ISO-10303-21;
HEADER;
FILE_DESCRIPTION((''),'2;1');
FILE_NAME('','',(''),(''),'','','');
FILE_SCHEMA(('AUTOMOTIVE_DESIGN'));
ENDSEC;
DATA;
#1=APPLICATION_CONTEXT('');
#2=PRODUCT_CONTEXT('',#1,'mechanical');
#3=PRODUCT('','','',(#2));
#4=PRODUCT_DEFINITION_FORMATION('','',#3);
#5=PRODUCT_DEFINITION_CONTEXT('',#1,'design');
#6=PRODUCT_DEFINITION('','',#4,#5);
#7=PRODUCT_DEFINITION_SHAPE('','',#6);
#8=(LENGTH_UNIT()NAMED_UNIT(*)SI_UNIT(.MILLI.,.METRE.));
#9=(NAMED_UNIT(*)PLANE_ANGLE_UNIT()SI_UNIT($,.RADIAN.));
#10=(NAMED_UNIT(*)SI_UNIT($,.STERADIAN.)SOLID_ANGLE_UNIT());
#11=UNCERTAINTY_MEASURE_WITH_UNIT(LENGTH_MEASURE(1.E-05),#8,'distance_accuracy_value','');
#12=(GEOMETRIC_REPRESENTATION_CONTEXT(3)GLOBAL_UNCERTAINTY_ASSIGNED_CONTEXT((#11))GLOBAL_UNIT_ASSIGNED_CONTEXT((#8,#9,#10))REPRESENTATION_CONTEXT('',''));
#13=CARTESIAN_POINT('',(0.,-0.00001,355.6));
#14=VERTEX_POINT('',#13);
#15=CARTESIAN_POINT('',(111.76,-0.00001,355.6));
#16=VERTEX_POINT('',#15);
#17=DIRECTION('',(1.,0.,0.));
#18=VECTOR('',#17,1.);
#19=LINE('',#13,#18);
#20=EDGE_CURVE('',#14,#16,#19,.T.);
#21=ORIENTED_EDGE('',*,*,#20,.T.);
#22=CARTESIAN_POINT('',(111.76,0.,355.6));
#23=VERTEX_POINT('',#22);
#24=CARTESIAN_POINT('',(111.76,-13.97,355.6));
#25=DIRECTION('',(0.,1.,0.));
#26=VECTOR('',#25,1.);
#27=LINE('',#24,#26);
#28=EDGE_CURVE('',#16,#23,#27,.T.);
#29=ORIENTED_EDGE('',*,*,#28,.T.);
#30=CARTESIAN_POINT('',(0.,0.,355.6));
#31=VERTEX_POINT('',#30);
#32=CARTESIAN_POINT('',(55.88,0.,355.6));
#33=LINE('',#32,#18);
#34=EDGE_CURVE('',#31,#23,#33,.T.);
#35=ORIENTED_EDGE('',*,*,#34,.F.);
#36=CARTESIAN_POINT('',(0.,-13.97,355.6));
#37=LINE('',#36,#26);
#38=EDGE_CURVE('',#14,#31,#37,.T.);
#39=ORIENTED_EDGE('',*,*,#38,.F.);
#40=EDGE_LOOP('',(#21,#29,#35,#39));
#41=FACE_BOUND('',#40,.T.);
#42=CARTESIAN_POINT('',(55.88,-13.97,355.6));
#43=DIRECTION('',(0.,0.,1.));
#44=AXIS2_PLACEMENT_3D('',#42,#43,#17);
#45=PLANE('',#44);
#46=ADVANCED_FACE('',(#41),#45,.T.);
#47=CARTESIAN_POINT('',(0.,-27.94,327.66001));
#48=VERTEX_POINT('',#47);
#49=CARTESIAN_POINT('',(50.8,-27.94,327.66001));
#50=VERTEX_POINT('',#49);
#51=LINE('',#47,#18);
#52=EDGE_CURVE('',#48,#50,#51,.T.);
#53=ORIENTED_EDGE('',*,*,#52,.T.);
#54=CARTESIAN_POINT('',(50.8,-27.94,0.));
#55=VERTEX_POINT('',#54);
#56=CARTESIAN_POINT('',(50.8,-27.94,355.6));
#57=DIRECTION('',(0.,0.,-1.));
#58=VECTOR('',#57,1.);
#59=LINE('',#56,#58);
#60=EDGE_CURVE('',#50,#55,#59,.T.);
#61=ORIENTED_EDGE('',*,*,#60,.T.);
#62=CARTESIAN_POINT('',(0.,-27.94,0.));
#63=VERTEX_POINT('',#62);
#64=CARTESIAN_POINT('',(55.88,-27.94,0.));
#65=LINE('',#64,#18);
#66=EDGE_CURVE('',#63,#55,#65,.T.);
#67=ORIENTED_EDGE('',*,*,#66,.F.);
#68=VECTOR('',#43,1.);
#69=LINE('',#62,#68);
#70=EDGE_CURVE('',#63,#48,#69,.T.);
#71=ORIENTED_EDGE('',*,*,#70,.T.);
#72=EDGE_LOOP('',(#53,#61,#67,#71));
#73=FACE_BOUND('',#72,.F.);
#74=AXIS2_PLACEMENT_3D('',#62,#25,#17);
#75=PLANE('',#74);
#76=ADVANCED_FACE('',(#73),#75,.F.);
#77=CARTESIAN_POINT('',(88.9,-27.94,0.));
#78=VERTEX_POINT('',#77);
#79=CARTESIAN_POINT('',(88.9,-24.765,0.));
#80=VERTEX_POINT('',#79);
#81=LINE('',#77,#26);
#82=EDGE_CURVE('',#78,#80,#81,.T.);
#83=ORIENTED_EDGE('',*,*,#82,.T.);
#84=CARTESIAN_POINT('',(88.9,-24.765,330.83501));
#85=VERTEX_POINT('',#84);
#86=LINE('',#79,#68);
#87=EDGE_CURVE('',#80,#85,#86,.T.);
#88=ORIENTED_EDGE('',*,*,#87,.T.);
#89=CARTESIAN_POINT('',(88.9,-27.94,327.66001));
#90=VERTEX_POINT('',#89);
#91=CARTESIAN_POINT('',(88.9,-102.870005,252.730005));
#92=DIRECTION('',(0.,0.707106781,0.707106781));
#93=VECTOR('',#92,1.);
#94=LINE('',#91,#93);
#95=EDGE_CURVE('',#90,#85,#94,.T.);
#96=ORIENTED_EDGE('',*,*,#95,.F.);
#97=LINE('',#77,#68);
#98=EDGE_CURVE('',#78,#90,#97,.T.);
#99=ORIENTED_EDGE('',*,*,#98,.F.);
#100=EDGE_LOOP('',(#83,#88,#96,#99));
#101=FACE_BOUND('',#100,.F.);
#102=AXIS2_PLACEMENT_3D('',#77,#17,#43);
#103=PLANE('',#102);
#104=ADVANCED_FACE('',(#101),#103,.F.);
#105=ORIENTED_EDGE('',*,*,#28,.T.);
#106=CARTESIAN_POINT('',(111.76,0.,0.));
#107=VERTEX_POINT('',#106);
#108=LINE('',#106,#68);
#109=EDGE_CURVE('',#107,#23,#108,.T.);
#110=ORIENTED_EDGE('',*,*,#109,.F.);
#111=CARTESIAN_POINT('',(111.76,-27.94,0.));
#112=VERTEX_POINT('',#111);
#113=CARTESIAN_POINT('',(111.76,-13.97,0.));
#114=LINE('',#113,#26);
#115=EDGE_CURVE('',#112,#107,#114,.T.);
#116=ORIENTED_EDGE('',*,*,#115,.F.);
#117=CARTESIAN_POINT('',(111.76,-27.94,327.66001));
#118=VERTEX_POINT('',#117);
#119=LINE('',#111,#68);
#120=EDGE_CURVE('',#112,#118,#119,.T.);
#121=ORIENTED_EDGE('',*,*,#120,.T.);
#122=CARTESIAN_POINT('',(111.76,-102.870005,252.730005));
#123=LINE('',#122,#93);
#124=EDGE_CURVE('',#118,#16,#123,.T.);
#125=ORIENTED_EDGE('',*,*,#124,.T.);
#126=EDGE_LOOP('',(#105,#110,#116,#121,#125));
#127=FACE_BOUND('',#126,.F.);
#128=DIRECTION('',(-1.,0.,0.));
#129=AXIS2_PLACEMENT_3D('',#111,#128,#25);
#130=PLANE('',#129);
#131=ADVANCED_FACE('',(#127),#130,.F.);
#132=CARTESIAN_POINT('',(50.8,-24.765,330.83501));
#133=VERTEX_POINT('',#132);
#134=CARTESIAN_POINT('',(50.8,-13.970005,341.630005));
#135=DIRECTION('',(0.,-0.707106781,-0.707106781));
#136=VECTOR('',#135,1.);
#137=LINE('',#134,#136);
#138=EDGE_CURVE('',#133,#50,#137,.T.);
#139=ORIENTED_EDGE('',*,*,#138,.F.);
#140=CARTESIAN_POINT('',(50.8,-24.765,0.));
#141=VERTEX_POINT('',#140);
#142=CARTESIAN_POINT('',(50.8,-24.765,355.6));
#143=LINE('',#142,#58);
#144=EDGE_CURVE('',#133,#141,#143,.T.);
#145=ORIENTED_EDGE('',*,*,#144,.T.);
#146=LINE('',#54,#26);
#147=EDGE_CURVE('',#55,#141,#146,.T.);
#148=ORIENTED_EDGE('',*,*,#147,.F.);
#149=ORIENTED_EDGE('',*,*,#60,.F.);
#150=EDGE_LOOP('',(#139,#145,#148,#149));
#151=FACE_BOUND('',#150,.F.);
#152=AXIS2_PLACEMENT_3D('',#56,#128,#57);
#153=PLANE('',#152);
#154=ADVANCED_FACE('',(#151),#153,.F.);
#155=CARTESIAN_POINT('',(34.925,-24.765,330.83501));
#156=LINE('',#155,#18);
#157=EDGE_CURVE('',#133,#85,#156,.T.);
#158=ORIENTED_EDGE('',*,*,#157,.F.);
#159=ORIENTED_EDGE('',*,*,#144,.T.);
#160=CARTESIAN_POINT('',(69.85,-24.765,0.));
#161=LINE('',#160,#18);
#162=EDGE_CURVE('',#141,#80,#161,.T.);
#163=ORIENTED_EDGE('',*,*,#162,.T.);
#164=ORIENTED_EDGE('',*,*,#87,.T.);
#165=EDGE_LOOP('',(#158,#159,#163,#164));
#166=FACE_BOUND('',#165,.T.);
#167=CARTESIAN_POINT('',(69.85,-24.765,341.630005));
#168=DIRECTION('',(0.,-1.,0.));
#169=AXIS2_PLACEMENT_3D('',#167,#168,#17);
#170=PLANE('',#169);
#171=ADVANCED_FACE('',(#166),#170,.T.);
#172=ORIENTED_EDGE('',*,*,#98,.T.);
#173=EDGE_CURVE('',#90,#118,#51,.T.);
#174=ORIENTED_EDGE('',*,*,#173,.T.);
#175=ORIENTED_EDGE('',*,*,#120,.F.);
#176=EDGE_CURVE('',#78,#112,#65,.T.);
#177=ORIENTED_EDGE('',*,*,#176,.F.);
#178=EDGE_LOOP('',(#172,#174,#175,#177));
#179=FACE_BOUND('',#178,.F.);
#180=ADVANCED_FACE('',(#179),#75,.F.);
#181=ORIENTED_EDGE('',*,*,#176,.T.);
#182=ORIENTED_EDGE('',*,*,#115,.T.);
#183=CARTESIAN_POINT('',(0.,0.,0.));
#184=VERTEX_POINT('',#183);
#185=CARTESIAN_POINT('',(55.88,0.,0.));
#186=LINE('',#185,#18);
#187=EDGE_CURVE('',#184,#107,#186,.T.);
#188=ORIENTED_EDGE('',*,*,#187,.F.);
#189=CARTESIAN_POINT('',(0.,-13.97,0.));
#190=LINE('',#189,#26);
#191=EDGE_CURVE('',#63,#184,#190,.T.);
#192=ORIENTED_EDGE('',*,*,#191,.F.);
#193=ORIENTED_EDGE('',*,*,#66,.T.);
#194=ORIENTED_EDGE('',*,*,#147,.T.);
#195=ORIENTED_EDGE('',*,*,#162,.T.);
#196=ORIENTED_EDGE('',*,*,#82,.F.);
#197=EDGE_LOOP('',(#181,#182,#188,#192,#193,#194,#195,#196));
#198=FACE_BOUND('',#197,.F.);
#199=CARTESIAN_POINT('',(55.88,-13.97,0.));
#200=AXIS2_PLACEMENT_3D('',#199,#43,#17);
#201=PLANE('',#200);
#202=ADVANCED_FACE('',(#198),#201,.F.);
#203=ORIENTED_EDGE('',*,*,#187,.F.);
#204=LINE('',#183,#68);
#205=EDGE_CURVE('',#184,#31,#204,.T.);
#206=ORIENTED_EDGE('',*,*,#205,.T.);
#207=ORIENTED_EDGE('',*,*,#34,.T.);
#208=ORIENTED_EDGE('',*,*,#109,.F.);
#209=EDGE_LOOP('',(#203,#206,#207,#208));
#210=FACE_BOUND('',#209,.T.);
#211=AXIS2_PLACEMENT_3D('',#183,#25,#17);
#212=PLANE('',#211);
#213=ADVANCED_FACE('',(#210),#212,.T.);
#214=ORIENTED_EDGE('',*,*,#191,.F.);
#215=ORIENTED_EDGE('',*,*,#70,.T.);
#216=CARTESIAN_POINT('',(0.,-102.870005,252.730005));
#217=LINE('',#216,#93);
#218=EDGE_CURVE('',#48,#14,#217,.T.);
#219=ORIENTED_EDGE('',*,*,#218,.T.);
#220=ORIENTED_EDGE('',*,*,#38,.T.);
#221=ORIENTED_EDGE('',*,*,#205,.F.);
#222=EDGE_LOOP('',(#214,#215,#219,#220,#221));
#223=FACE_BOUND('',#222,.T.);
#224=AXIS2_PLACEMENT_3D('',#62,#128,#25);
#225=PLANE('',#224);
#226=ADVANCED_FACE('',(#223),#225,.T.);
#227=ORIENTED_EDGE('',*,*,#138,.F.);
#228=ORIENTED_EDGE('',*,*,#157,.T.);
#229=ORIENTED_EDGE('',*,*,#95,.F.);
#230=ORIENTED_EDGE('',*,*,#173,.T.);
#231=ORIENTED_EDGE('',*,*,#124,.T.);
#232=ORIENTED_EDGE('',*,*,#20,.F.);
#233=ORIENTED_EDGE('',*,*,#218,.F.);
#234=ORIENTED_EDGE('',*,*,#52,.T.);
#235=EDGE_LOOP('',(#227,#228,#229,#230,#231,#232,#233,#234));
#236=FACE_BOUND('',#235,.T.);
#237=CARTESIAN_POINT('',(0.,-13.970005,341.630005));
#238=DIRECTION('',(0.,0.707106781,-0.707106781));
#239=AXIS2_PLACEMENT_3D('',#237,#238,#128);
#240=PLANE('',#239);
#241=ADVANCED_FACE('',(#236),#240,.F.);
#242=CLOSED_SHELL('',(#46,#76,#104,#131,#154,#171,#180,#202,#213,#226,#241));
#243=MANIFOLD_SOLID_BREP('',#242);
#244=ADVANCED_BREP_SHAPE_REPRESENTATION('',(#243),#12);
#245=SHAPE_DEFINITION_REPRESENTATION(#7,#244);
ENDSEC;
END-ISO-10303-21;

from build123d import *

# Parameters (mm, degrees)
F0_W     = 111.76
F0_H     = 27.94
F1_DEPTH = 355.6
F2_SIZE  = 27.93999
F3_W     = 38.1
F3_H     = 27.93999
F3_H_2   = 327.66001
F4_DEPTH = 3.175


# Not quite as in the source:
# - a fillet or chamfer is up to 0.001 mm smaller than in the source, because OpenCascade refuses the exact size


with BuildPart() as f1:
    # F0 (on Top) → F1 (new body)
    with BuildSketch(Plane.XY):
        with Locations((55.88, -13.97)):
            Rectangle(F0_W, F0_H)
    extrude(amount=F1_DEPTH)

    # F2 (size 27.94 in the source; OpenCascade refuses exactly that, so slightly less here)
    f2_edges = [f1.edges().sort_by_distance(p)[0] for p in [
        (55.88, -27.94, 355.6),
    ]]
    chamfer(f2_edges, length=F2_SIZE)

    # F3 (on face) → F4 (cut)
    with BuildSketch(Plane.XZ.offset(27.94)):
        with Locations((69.85, 341.630005)):
            Rectangle(F3_W, F3_H)
        with Locations((69.85, 163.830005)):
            Rectangle(F3_W, F3_H_2)
    extrude(amount=-F4_DEPTH, mode=Mode.SUBTRACT)


solid = f1.part
